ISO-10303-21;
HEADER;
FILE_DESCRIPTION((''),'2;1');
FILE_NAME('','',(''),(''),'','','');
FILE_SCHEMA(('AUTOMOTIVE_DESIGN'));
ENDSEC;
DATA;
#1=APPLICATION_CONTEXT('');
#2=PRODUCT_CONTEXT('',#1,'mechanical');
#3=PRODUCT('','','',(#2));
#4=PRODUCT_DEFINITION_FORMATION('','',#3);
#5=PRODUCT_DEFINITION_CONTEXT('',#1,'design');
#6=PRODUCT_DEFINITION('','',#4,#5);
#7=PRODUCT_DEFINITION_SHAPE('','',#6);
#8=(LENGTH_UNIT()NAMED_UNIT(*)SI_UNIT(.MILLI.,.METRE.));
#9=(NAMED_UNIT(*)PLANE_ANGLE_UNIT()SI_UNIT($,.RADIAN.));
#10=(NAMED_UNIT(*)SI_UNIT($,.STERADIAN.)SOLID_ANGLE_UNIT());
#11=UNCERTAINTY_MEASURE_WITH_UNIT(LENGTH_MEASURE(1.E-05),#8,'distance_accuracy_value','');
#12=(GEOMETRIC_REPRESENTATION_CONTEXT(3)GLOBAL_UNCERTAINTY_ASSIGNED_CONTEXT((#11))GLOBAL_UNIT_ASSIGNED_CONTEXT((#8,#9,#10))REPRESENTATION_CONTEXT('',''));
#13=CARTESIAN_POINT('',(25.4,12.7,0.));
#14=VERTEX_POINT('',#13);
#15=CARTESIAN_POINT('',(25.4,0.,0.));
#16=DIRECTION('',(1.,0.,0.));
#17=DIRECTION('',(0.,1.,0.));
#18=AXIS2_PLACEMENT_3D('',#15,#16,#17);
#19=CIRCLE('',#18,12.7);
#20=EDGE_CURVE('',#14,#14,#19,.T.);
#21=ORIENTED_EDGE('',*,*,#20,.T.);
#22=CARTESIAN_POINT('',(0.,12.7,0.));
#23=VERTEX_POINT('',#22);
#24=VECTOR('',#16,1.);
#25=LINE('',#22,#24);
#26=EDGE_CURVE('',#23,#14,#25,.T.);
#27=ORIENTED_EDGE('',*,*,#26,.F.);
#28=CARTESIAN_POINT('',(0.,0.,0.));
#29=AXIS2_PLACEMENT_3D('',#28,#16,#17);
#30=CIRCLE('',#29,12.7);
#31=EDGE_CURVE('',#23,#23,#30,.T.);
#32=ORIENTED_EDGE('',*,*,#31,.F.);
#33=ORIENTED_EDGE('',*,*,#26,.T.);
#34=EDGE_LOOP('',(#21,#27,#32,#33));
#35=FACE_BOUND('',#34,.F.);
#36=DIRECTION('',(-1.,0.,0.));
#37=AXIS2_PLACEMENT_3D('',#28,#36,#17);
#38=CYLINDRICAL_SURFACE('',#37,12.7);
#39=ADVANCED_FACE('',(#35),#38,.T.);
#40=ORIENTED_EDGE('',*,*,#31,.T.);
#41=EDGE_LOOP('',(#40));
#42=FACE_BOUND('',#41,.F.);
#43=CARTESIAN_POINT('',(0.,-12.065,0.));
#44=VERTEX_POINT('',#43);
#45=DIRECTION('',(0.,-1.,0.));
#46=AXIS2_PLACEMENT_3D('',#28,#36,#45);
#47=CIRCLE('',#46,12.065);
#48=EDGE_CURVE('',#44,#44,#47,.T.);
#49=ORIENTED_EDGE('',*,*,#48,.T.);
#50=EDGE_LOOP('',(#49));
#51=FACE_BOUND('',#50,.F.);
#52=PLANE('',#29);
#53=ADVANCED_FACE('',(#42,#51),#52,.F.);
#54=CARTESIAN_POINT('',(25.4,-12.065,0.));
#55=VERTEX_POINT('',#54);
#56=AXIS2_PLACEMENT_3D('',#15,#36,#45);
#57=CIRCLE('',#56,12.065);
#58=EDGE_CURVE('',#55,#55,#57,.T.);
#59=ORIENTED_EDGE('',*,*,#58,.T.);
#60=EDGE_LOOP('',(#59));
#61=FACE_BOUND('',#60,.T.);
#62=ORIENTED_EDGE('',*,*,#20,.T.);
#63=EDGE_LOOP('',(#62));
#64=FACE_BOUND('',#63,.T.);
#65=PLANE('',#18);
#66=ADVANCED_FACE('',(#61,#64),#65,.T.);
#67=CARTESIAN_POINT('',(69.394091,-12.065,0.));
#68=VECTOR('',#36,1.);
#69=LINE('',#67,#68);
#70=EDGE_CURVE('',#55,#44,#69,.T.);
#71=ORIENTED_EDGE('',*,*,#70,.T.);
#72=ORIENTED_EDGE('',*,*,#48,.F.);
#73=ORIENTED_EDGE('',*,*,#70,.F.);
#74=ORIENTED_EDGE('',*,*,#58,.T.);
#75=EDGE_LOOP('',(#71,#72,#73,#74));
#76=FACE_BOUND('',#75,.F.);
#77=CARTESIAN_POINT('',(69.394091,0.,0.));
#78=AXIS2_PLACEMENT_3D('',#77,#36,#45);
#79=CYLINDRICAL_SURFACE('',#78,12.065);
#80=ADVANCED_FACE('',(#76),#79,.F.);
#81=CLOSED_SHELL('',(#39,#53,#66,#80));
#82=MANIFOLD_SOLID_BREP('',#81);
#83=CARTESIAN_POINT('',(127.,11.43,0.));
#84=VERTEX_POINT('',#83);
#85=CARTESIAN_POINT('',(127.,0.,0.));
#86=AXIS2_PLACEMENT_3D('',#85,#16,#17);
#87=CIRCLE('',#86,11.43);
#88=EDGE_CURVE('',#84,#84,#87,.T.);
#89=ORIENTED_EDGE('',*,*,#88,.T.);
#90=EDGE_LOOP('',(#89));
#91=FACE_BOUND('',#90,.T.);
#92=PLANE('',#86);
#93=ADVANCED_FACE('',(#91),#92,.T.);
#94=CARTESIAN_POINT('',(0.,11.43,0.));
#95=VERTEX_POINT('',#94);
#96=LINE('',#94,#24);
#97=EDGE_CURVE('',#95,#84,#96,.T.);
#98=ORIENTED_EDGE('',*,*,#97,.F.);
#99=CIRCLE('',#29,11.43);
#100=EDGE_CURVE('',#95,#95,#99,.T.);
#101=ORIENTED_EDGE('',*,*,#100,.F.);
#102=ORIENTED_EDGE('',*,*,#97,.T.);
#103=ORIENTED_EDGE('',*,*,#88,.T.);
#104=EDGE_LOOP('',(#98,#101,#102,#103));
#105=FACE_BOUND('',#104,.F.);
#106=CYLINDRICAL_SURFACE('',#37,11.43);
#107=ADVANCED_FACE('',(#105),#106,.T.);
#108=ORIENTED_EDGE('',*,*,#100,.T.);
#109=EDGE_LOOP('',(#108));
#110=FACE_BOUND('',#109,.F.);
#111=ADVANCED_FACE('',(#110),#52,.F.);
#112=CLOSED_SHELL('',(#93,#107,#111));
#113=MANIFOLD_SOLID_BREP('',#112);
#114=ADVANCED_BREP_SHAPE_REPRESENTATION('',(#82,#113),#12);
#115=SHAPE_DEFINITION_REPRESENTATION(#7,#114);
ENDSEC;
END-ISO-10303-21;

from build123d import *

# Parameters (mm, degrees)
F0_R     = 12.7
F1_DEPTH = 25.4
F3_D     = 24.13
F4_R     = 11.43
F5_DEPTH = 127


# Not quite as in the source:
# - the program builds the solid bodies; features that only make, move or delete a surface that nothing else refers to are left out


with BuildPart() as f1:
    # F0 (on Right) → F1 (new body)
    with BuildSketch(Plane.YZ):
        Circle(F0_R)
    extrude(amount=F1_DEPTH)

    # F3 (through all)
    with Locations(Plane.YZ.offset(25.4)):
        with Locations((0, 0)):
            Hole(F3_D / 2)


with BuildPart() as f5:
    # F4 (on Right) → F5 (new body)
    with BuildSketch(Plane.YZ):
        Circle(F4_R)
    extrude(amount=F5_DEPTH)


solid = Compound([f1.part, f5.part])
